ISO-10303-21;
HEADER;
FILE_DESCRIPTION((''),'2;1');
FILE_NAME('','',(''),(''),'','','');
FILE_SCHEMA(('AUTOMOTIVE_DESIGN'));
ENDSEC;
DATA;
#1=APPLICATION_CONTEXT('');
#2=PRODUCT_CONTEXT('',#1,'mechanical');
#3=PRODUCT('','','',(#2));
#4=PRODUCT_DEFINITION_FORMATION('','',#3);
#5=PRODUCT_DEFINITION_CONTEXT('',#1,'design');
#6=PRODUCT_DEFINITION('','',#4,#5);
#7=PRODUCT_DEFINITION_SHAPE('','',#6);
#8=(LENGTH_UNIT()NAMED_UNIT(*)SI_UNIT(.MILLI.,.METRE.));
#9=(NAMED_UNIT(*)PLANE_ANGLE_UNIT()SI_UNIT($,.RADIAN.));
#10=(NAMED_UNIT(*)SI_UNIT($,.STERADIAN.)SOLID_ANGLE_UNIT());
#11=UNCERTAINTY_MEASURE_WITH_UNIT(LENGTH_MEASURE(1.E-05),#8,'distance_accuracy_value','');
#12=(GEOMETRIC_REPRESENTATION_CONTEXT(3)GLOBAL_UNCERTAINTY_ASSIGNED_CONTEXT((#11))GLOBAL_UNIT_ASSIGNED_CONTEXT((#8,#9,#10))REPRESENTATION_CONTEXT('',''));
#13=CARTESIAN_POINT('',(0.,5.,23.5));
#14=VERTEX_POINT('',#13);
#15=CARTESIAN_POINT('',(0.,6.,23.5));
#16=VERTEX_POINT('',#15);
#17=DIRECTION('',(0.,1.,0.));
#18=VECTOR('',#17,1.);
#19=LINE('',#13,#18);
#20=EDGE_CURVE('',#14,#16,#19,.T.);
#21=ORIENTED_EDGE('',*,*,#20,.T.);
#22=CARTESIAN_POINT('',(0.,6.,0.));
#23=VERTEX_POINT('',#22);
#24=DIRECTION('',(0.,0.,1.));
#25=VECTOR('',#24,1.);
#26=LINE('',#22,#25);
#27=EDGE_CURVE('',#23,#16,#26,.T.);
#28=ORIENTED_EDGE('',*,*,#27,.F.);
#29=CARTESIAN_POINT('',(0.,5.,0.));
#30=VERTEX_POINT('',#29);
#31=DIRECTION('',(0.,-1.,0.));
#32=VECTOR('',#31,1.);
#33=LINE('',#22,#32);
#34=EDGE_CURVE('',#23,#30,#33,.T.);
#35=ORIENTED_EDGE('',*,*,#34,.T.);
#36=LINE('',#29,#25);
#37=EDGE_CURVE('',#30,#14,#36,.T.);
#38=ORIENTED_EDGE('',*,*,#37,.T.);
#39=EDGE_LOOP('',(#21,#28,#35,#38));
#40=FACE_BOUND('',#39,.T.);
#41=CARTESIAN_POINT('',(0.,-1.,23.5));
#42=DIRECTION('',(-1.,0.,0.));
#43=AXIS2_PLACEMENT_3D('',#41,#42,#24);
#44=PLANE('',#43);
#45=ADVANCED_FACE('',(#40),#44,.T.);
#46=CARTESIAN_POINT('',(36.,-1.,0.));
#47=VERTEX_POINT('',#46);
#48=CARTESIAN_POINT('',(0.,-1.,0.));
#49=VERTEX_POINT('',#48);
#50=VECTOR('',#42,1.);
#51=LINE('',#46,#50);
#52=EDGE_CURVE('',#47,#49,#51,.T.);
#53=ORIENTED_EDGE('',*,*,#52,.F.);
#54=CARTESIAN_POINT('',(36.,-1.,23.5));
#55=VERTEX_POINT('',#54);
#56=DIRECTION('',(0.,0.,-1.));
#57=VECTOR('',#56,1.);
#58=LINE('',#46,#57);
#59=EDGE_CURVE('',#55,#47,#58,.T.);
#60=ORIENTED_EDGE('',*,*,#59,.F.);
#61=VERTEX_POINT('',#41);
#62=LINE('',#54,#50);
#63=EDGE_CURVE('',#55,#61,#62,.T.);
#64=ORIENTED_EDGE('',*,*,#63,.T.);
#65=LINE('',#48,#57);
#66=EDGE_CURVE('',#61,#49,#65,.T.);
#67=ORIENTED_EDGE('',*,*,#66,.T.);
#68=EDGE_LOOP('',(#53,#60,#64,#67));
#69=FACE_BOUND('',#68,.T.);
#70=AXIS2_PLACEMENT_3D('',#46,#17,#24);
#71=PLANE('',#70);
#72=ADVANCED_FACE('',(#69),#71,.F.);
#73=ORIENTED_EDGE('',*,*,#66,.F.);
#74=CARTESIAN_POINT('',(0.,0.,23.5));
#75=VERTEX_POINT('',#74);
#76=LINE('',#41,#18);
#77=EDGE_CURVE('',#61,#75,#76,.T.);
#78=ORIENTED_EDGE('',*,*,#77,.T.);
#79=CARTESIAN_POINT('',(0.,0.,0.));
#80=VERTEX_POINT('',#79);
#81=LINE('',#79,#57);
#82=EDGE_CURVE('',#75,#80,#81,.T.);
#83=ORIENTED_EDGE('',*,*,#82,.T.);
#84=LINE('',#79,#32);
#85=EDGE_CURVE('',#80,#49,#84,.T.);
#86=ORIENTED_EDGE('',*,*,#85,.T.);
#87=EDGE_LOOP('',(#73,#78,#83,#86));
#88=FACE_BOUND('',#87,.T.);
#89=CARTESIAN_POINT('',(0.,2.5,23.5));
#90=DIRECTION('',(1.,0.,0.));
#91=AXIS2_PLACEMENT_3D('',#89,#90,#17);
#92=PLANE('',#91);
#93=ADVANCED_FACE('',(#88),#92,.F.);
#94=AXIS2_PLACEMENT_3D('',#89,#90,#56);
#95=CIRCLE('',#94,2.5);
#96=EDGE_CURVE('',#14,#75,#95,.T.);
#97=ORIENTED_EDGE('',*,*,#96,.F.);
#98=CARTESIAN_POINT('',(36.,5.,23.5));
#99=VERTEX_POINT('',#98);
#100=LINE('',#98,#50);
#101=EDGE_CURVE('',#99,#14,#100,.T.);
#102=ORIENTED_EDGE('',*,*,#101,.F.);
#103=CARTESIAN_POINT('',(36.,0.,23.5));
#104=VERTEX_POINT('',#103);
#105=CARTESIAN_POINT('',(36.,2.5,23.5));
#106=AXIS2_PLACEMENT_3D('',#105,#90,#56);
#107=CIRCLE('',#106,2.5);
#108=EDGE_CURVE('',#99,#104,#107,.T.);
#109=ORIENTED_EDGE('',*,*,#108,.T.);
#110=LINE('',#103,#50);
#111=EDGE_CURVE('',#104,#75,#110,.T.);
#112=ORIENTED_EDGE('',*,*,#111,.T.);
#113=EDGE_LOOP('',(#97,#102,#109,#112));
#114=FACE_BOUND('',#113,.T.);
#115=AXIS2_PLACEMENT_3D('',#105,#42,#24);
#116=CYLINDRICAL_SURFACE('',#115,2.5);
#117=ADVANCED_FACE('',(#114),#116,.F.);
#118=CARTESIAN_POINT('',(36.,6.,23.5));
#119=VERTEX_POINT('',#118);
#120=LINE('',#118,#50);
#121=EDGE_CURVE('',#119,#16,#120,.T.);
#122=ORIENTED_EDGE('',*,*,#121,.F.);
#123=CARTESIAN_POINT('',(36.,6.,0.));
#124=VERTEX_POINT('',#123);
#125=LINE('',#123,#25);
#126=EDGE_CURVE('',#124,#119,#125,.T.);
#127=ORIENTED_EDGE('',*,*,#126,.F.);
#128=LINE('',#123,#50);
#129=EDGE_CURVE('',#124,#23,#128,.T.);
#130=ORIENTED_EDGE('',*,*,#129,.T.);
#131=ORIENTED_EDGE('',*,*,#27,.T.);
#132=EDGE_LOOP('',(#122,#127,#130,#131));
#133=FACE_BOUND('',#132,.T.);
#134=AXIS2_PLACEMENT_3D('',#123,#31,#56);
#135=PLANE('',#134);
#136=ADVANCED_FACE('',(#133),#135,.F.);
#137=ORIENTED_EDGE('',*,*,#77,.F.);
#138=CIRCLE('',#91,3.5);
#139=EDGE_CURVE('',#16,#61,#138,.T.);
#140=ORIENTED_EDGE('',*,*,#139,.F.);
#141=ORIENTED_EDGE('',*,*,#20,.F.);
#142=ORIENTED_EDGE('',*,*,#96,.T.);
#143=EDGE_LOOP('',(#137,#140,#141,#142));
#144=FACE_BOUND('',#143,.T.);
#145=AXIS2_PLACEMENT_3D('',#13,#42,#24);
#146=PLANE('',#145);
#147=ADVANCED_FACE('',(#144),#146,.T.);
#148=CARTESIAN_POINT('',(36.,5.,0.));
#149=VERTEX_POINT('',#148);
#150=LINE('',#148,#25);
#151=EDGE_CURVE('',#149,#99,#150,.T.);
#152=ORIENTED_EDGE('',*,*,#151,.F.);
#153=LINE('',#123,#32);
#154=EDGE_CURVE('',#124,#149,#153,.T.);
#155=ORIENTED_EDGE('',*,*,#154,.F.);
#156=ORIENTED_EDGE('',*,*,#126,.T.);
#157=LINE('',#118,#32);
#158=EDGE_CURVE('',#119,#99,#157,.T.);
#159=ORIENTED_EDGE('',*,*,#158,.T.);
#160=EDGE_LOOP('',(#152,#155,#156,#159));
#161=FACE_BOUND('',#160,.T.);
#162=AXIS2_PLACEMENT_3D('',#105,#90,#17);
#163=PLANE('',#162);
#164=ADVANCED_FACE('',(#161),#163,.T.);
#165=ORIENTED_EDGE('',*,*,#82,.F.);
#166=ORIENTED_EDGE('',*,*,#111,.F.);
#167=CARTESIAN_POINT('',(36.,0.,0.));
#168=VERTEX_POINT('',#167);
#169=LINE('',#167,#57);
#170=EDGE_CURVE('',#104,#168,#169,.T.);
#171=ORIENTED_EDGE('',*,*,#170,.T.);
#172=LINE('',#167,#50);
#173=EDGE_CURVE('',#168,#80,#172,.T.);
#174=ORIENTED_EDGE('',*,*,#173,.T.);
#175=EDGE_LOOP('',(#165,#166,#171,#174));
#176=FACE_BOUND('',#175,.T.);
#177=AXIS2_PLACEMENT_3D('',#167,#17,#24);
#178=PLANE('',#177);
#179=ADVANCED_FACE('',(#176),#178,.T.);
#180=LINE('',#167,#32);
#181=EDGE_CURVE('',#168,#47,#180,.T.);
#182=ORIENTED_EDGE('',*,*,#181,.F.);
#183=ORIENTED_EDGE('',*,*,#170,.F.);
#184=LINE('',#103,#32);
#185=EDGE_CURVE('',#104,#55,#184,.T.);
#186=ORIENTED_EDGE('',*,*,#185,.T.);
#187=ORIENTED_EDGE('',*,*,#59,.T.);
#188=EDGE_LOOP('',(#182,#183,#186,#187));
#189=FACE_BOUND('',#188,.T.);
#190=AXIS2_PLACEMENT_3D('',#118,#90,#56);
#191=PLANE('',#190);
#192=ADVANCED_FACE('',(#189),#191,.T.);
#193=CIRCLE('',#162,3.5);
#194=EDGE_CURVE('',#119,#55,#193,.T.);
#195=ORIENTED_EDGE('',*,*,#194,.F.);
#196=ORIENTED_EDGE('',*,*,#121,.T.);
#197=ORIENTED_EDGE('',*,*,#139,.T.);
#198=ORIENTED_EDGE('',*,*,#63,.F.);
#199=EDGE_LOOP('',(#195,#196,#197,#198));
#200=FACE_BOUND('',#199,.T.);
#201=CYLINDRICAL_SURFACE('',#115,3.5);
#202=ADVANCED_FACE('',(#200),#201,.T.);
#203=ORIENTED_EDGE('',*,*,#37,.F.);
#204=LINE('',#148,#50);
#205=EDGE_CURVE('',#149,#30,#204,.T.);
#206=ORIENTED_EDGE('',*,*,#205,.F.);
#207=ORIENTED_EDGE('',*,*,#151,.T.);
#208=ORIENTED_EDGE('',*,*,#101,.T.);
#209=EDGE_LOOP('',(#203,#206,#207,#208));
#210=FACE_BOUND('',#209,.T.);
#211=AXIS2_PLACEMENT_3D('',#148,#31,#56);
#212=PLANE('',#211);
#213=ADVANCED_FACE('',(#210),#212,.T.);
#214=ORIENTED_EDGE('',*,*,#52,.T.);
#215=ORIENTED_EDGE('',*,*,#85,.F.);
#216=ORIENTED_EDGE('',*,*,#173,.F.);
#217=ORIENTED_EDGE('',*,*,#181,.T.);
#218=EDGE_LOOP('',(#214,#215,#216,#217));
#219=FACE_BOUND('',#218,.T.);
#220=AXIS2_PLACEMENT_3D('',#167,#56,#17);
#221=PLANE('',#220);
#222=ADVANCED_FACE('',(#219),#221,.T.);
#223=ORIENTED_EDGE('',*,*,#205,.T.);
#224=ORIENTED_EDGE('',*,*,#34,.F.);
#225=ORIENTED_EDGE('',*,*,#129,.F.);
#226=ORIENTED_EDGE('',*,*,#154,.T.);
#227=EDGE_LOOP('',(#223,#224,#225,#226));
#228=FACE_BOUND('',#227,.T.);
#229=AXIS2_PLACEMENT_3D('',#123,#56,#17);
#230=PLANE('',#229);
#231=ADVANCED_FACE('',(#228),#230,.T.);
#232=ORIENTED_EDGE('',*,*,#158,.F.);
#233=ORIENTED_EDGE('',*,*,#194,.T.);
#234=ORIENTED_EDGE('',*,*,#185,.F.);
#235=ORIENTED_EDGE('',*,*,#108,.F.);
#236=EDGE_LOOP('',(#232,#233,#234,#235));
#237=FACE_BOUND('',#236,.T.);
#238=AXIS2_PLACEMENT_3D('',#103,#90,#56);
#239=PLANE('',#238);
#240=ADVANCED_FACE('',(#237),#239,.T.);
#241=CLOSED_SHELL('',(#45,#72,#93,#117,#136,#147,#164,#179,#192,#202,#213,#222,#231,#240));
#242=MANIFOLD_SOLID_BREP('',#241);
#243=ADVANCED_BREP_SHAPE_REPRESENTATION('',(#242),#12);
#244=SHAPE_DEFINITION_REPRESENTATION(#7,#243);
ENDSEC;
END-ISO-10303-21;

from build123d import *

# Parameters (mm, degrees)
TABAN_FLAN_1_DEPTH = 36


# Sheet-metal steps are written as plain solids
with BuildPart() as part:
    # Çizim1 → Taban-Flanş1 (new body)
    with BuildSketch(Plane.YZ):
        with BuildLine():
            Line((0, 0), (0, 23.5))
            ThreePointArc((0, 23.5), (2.5, 26), (5, 23.5))
            Line((5, 23.5), (5, 0))
            Line((5, 0), (6, 0))
            Line((6, 0), (6, 23.5))
            ThreePointArc((6, 23.5), (2.5, 27), (-1, 23.5))
            Line((-1, 23.5), (-1, 0))
            Line((-1, 0), (0, 0))
        make_face()
    extrude(amount=TABAN_FLAN_1_DEPTH)


solid = part.part
